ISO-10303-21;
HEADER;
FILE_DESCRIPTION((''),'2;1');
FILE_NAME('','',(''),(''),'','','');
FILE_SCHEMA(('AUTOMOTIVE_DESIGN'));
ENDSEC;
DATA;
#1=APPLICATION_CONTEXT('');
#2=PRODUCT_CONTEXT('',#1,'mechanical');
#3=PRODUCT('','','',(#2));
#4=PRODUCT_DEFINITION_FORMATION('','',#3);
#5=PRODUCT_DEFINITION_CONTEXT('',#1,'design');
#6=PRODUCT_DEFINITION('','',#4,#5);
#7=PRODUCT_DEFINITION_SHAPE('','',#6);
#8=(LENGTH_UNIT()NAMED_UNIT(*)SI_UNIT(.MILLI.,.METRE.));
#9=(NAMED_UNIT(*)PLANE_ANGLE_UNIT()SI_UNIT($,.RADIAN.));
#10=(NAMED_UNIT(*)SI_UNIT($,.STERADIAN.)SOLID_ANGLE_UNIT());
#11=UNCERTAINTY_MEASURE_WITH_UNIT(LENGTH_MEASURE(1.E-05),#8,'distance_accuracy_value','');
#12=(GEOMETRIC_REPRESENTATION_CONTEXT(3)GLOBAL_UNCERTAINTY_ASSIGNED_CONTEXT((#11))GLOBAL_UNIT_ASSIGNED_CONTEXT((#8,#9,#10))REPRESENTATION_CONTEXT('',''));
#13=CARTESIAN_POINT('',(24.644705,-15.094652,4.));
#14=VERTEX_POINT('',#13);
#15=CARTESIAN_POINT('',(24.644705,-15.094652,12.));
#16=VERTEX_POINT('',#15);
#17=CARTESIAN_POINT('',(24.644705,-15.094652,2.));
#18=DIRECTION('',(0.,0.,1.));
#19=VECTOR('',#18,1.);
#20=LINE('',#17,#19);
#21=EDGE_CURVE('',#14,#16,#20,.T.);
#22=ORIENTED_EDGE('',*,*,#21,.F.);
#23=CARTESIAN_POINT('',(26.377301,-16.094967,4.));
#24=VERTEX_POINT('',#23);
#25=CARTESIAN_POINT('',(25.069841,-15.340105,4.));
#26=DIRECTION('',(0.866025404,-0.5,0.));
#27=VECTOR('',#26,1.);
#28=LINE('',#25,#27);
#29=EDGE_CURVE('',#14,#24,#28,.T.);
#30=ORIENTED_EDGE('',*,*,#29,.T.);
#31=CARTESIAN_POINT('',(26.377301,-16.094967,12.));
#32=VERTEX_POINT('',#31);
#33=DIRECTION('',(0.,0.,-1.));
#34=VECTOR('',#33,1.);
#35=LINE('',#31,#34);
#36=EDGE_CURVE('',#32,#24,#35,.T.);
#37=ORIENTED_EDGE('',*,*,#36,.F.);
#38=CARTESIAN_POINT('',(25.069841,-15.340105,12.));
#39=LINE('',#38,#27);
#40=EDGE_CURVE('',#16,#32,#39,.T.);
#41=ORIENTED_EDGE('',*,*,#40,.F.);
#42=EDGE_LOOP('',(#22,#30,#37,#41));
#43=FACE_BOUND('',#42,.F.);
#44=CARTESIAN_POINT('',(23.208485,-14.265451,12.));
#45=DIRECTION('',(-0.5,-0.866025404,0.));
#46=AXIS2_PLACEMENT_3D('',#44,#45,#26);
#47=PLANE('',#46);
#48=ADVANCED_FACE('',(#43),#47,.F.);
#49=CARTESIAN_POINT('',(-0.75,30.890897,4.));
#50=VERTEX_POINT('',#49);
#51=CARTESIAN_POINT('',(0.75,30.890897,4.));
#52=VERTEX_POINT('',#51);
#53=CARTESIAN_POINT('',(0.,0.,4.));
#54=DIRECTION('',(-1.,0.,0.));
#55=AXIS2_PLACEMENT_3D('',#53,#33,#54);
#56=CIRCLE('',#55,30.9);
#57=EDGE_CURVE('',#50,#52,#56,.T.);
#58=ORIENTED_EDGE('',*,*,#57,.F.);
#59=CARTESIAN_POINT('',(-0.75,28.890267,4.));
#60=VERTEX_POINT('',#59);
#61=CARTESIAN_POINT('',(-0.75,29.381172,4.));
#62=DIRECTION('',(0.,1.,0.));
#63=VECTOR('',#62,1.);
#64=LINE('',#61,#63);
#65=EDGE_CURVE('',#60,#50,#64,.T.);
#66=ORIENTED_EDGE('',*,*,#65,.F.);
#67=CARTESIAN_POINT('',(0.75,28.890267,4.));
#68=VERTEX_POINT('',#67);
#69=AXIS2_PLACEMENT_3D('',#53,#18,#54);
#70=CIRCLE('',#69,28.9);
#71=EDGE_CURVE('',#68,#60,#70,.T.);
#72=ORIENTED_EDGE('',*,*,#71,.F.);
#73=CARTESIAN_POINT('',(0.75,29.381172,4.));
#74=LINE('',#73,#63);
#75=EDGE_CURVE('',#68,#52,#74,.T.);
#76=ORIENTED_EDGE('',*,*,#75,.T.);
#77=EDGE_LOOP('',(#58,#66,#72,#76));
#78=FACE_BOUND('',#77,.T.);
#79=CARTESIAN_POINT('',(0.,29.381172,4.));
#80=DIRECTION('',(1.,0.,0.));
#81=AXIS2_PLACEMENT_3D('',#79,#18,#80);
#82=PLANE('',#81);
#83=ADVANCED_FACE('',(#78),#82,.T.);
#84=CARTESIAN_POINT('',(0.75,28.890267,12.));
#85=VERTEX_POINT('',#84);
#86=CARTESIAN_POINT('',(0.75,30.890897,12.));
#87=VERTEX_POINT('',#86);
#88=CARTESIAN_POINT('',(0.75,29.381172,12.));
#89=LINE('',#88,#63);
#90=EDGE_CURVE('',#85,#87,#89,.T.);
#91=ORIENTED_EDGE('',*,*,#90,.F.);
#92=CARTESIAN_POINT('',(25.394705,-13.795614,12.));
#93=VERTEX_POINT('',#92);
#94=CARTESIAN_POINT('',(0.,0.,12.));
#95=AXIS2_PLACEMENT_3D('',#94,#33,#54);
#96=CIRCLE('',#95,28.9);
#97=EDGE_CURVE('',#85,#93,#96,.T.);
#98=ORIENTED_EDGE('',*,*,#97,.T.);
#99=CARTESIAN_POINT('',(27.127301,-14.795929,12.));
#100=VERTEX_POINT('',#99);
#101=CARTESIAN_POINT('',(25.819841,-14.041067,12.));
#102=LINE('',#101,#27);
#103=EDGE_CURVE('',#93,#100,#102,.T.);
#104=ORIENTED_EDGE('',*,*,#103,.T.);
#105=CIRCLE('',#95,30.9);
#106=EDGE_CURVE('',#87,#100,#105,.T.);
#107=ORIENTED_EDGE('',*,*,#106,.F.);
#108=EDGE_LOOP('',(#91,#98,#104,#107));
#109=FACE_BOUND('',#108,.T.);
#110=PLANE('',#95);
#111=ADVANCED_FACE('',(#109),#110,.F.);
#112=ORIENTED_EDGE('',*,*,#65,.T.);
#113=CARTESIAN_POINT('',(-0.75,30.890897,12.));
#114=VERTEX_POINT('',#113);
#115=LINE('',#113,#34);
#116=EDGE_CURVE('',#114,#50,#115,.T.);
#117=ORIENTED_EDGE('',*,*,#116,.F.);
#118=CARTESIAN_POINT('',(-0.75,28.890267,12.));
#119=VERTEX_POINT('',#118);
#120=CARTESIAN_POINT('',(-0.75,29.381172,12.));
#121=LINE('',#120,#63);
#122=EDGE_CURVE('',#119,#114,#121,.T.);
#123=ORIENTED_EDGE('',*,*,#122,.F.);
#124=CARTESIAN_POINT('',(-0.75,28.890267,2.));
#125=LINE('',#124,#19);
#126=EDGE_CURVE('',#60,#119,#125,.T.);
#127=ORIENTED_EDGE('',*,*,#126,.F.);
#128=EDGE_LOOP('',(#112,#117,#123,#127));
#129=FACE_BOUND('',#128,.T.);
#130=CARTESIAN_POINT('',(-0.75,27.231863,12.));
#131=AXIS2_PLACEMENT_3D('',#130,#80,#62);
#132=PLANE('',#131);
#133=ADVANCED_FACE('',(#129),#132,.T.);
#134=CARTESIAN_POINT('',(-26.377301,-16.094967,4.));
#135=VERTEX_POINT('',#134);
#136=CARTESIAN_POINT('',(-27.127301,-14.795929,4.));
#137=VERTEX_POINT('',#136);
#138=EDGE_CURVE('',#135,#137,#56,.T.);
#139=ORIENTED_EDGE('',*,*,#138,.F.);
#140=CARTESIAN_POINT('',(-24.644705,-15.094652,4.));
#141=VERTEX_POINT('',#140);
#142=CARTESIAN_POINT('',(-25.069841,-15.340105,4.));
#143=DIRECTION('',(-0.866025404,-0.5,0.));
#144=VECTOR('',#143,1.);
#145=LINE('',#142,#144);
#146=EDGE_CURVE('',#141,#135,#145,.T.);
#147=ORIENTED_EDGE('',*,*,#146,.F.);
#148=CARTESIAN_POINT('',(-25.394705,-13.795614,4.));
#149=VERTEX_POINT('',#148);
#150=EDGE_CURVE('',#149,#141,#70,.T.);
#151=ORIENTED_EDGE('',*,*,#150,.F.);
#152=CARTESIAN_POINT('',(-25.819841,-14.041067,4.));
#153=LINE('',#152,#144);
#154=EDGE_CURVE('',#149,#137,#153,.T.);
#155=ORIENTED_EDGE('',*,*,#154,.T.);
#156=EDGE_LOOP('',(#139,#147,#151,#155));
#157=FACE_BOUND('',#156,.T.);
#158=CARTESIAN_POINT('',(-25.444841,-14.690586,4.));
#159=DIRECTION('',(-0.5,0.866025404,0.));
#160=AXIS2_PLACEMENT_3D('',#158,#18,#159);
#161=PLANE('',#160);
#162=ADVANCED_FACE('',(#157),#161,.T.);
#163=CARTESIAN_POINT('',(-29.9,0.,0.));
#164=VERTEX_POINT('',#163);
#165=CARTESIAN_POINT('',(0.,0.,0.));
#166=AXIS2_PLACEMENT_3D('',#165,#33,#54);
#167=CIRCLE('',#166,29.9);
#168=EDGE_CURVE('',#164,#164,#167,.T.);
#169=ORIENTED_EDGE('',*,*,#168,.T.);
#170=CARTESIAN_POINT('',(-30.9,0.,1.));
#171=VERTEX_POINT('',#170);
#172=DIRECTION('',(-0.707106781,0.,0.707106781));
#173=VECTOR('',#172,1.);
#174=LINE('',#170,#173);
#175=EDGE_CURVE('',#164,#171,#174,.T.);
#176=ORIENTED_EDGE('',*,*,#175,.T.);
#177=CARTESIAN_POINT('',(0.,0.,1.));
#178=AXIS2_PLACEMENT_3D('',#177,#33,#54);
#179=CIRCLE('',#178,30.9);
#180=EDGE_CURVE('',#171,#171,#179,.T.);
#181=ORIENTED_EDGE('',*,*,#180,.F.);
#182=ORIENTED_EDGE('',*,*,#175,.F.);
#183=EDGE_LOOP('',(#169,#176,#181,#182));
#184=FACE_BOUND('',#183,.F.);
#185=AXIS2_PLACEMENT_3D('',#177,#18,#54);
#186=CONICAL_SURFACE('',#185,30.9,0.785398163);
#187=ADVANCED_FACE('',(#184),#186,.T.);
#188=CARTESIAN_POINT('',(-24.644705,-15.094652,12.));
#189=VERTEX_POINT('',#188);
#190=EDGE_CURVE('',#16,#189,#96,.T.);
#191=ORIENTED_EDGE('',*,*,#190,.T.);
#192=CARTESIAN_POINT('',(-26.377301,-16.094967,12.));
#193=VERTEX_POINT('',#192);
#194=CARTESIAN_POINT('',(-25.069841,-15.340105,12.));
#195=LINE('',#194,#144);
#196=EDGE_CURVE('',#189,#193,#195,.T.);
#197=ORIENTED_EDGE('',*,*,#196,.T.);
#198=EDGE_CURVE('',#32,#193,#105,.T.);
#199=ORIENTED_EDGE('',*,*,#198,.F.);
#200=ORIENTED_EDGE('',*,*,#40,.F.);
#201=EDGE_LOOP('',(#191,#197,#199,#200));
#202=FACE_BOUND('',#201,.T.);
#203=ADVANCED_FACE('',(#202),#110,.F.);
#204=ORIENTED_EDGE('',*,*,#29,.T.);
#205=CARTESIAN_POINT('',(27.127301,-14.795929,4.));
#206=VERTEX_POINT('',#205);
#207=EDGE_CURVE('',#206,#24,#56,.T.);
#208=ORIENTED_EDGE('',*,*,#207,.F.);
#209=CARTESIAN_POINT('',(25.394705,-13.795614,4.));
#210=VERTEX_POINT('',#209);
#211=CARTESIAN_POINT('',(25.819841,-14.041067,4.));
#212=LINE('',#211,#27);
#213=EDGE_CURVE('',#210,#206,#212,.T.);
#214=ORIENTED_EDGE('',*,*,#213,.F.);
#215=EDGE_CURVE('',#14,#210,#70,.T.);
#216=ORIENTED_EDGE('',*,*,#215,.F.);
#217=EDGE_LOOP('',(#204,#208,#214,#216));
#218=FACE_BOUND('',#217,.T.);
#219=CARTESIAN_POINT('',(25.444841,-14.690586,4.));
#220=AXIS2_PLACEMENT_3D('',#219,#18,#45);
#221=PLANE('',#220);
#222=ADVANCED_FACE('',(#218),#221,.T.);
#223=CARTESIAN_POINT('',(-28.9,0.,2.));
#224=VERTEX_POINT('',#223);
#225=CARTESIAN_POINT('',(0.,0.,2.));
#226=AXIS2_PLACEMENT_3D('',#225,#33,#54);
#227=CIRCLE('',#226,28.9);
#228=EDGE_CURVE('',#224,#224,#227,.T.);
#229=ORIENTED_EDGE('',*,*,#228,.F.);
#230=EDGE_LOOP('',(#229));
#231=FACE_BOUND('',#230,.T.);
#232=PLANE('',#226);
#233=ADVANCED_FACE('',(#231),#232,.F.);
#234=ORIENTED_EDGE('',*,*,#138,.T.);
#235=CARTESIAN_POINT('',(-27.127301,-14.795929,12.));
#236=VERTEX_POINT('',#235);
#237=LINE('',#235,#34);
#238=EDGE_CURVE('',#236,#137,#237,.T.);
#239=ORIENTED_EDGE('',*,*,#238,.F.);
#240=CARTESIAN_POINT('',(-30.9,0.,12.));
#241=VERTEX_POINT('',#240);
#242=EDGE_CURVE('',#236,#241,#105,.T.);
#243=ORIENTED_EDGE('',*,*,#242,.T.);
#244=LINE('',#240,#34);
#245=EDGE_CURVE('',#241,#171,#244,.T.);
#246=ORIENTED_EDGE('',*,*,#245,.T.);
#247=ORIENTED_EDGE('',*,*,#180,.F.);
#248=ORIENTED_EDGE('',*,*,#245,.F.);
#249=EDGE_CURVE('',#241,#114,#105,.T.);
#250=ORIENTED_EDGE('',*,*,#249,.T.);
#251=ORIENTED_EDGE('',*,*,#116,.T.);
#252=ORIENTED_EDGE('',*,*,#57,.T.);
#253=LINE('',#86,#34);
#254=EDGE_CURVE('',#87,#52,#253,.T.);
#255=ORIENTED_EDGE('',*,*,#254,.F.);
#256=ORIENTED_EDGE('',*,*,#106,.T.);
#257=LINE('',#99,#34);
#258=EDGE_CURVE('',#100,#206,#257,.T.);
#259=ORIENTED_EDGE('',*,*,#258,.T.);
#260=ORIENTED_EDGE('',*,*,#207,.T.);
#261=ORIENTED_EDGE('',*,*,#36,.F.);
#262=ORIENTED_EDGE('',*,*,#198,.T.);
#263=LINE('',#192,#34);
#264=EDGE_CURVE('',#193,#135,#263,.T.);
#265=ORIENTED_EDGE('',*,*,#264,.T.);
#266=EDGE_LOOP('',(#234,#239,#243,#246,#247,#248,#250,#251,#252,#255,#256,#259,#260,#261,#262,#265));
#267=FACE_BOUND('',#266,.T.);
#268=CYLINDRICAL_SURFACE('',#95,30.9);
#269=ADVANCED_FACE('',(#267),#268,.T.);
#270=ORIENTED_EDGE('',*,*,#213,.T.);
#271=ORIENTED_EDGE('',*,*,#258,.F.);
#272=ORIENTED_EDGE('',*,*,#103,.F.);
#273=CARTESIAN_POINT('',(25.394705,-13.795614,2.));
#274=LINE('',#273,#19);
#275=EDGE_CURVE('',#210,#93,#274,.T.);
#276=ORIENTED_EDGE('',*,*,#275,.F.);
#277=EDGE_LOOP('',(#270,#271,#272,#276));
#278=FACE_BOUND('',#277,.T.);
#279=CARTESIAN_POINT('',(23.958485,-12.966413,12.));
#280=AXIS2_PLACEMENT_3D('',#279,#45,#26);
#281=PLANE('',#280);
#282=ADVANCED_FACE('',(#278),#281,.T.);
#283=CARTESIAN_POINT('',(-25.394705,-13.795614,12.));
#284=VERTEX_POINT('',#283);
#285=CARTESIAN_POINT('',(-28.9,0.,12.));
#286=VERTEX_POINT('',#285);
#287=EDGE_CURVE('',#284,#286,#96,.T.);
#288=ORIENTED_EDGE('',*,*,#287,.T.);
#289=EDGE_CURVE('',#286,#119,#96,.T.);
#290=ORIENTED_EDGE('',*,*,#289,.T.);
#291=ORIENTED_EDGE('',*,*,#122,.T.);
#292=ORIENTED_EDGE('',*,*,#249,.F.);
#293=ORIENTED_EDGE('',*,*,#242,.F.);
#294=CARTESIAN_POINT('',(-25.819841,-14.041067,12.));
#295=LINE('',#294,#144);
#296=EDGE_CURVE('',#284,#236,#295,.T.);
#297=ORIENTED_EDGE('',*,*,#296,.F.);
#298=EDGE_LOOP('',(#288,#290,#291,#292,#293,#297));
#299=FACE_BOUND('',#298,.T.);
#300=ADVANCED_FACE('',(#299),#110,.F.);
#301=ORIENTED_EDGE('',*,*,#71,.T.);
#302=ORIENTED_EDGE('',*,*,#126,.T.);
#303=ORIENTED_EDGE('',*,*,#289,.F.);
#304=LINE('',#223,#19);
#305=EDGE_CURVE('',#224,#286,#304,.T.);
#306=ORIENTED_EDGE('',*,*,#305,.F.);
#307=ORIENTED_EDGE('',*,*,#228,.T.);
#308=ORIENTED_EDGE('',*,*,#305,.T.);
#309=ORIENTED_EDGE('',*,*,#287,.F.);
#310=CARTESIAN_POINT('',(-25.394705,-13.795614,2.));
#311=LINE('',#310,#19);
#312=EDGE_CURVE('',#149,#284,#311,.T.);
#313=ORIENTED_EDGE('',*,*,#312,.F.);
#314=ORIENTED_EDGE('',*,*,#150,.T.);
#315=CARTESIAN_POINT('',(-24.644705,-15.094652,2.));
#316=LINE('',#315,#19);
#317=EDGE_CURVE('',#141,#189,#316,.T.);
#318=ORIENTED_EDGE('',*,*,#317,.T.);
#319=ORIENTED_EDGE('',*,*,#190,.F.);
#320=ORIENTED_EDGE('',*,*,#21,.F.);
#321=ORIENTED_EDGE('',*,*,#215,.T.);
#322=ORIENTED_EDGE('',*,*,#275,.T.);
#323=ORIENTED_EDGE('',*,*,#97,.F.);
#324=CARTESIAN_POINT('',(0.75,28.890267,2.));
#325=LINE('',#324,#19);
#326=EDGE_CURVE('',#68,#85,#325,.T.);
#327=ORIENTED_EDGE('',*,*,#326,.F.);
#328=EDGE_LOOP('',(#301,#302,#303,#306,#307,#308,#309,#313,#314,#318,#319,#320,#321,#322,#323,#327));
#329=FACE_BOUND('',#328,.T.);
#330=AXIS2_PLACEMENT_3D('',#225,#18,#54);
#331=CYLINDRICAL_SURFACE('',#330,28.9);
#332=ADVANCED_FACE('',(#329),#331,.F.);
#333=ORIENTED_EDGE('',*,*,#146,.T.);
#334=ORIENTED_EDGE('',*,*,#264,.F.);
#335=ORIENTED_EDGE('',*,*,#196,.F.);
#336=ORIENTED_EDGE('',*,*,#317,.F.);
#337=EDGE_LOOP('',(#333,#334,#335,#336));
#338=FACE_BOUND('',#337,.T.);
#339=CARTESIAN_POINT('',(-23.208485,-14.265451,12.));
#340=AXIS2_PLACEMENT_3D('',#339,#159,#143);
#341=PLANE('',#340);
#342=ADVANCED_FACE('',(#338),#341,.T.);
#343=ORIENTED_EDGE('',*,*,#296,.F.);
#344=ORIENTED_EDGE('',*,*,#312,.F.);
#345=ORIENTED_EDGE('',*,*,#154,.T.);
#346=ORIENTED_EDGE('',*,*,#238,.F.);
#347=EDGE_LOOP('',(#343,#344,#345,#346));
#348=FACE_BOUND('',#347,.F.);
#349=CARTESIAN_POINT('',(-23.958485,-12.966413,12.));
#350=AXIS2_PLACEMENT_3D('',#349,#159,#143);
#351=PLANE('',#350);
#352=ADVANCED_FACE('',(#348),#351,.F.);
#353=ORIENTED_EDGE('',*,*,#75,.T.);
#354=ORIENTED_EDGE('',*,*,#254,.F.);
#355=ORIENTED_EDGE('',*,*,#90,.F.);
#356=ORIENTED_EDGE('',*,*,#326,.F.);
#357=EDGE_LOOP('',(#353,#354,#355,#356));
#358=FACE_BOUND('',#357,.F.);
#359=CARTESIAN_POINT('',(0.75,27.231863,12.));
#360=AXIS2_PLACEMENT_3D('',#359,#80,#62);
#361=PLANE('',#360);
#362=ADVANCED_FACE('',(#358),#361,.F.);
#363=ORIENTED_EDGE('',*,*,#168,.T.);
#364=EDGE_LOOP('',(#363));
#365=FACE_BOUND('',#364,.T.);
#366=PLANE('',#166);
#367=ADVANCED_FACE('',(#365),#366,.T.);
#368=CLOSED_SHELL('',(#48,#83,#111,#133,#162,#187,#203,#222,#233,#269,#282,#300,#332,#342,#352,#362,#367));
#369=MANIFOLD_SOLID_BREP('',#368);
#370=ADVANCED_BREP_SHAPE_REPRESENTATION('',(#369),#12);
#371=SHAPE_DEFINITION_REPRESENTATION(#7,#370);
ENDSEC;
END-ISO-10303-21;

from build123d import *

# Parameters (mm, degrees)
F3_W            = 1.5
F3_H            = 4.2986176481
F4_DEPTH        = 8
F4_COPIES_COUNT = 3
F5_SIZE         = 1


# Not quite as in the source:
# - a pattern or mirror of a feature is missing from the dataset's text; its kind, count and spacing are read off the source's solid


with BuildPart() as f1:
    # F0 (on Front) → F1 (revolve)
    with BuildSketch(Plane.XZ):
        Polygon((-30.9, 0), (0, 0), (0, 2), (-28.9, 2), (-28.9, 12), (-30.9, 12), align=None)
    revolve(axis=Axis((0, 0, 1), (0, 0, -1)))

    # F3 (on offset) → F4 (cut)
    with BuildSketch(Plane.XY.offset(12)):
        with Locations((0, 29.3811720078)):
            Rectangle(F3_W, F3_H)
    f4 = extrude(amount=-F4_DEPTH, mode=Mode.SUBTRACT)

    # F4_copies: F4 ×3 about axis
    f4_copies_axis = Axis((0, 0, 0), (0, 0, 1))
    for i in range(1, F4_COPIES_COUNT):
        add(f4.rotate(f4_copies_axis, i * 360 / F4_COPIES_COUNT), mode=Mode.SUBTRACT)

    # F5
    f5_edges = [f1.edges().sort_by_distance(p)[0] for p in [
        (30.9, 0, 0),
    ]]
    chamfer(f5_edges, length=F5_SIZE)


solid = f1.part
